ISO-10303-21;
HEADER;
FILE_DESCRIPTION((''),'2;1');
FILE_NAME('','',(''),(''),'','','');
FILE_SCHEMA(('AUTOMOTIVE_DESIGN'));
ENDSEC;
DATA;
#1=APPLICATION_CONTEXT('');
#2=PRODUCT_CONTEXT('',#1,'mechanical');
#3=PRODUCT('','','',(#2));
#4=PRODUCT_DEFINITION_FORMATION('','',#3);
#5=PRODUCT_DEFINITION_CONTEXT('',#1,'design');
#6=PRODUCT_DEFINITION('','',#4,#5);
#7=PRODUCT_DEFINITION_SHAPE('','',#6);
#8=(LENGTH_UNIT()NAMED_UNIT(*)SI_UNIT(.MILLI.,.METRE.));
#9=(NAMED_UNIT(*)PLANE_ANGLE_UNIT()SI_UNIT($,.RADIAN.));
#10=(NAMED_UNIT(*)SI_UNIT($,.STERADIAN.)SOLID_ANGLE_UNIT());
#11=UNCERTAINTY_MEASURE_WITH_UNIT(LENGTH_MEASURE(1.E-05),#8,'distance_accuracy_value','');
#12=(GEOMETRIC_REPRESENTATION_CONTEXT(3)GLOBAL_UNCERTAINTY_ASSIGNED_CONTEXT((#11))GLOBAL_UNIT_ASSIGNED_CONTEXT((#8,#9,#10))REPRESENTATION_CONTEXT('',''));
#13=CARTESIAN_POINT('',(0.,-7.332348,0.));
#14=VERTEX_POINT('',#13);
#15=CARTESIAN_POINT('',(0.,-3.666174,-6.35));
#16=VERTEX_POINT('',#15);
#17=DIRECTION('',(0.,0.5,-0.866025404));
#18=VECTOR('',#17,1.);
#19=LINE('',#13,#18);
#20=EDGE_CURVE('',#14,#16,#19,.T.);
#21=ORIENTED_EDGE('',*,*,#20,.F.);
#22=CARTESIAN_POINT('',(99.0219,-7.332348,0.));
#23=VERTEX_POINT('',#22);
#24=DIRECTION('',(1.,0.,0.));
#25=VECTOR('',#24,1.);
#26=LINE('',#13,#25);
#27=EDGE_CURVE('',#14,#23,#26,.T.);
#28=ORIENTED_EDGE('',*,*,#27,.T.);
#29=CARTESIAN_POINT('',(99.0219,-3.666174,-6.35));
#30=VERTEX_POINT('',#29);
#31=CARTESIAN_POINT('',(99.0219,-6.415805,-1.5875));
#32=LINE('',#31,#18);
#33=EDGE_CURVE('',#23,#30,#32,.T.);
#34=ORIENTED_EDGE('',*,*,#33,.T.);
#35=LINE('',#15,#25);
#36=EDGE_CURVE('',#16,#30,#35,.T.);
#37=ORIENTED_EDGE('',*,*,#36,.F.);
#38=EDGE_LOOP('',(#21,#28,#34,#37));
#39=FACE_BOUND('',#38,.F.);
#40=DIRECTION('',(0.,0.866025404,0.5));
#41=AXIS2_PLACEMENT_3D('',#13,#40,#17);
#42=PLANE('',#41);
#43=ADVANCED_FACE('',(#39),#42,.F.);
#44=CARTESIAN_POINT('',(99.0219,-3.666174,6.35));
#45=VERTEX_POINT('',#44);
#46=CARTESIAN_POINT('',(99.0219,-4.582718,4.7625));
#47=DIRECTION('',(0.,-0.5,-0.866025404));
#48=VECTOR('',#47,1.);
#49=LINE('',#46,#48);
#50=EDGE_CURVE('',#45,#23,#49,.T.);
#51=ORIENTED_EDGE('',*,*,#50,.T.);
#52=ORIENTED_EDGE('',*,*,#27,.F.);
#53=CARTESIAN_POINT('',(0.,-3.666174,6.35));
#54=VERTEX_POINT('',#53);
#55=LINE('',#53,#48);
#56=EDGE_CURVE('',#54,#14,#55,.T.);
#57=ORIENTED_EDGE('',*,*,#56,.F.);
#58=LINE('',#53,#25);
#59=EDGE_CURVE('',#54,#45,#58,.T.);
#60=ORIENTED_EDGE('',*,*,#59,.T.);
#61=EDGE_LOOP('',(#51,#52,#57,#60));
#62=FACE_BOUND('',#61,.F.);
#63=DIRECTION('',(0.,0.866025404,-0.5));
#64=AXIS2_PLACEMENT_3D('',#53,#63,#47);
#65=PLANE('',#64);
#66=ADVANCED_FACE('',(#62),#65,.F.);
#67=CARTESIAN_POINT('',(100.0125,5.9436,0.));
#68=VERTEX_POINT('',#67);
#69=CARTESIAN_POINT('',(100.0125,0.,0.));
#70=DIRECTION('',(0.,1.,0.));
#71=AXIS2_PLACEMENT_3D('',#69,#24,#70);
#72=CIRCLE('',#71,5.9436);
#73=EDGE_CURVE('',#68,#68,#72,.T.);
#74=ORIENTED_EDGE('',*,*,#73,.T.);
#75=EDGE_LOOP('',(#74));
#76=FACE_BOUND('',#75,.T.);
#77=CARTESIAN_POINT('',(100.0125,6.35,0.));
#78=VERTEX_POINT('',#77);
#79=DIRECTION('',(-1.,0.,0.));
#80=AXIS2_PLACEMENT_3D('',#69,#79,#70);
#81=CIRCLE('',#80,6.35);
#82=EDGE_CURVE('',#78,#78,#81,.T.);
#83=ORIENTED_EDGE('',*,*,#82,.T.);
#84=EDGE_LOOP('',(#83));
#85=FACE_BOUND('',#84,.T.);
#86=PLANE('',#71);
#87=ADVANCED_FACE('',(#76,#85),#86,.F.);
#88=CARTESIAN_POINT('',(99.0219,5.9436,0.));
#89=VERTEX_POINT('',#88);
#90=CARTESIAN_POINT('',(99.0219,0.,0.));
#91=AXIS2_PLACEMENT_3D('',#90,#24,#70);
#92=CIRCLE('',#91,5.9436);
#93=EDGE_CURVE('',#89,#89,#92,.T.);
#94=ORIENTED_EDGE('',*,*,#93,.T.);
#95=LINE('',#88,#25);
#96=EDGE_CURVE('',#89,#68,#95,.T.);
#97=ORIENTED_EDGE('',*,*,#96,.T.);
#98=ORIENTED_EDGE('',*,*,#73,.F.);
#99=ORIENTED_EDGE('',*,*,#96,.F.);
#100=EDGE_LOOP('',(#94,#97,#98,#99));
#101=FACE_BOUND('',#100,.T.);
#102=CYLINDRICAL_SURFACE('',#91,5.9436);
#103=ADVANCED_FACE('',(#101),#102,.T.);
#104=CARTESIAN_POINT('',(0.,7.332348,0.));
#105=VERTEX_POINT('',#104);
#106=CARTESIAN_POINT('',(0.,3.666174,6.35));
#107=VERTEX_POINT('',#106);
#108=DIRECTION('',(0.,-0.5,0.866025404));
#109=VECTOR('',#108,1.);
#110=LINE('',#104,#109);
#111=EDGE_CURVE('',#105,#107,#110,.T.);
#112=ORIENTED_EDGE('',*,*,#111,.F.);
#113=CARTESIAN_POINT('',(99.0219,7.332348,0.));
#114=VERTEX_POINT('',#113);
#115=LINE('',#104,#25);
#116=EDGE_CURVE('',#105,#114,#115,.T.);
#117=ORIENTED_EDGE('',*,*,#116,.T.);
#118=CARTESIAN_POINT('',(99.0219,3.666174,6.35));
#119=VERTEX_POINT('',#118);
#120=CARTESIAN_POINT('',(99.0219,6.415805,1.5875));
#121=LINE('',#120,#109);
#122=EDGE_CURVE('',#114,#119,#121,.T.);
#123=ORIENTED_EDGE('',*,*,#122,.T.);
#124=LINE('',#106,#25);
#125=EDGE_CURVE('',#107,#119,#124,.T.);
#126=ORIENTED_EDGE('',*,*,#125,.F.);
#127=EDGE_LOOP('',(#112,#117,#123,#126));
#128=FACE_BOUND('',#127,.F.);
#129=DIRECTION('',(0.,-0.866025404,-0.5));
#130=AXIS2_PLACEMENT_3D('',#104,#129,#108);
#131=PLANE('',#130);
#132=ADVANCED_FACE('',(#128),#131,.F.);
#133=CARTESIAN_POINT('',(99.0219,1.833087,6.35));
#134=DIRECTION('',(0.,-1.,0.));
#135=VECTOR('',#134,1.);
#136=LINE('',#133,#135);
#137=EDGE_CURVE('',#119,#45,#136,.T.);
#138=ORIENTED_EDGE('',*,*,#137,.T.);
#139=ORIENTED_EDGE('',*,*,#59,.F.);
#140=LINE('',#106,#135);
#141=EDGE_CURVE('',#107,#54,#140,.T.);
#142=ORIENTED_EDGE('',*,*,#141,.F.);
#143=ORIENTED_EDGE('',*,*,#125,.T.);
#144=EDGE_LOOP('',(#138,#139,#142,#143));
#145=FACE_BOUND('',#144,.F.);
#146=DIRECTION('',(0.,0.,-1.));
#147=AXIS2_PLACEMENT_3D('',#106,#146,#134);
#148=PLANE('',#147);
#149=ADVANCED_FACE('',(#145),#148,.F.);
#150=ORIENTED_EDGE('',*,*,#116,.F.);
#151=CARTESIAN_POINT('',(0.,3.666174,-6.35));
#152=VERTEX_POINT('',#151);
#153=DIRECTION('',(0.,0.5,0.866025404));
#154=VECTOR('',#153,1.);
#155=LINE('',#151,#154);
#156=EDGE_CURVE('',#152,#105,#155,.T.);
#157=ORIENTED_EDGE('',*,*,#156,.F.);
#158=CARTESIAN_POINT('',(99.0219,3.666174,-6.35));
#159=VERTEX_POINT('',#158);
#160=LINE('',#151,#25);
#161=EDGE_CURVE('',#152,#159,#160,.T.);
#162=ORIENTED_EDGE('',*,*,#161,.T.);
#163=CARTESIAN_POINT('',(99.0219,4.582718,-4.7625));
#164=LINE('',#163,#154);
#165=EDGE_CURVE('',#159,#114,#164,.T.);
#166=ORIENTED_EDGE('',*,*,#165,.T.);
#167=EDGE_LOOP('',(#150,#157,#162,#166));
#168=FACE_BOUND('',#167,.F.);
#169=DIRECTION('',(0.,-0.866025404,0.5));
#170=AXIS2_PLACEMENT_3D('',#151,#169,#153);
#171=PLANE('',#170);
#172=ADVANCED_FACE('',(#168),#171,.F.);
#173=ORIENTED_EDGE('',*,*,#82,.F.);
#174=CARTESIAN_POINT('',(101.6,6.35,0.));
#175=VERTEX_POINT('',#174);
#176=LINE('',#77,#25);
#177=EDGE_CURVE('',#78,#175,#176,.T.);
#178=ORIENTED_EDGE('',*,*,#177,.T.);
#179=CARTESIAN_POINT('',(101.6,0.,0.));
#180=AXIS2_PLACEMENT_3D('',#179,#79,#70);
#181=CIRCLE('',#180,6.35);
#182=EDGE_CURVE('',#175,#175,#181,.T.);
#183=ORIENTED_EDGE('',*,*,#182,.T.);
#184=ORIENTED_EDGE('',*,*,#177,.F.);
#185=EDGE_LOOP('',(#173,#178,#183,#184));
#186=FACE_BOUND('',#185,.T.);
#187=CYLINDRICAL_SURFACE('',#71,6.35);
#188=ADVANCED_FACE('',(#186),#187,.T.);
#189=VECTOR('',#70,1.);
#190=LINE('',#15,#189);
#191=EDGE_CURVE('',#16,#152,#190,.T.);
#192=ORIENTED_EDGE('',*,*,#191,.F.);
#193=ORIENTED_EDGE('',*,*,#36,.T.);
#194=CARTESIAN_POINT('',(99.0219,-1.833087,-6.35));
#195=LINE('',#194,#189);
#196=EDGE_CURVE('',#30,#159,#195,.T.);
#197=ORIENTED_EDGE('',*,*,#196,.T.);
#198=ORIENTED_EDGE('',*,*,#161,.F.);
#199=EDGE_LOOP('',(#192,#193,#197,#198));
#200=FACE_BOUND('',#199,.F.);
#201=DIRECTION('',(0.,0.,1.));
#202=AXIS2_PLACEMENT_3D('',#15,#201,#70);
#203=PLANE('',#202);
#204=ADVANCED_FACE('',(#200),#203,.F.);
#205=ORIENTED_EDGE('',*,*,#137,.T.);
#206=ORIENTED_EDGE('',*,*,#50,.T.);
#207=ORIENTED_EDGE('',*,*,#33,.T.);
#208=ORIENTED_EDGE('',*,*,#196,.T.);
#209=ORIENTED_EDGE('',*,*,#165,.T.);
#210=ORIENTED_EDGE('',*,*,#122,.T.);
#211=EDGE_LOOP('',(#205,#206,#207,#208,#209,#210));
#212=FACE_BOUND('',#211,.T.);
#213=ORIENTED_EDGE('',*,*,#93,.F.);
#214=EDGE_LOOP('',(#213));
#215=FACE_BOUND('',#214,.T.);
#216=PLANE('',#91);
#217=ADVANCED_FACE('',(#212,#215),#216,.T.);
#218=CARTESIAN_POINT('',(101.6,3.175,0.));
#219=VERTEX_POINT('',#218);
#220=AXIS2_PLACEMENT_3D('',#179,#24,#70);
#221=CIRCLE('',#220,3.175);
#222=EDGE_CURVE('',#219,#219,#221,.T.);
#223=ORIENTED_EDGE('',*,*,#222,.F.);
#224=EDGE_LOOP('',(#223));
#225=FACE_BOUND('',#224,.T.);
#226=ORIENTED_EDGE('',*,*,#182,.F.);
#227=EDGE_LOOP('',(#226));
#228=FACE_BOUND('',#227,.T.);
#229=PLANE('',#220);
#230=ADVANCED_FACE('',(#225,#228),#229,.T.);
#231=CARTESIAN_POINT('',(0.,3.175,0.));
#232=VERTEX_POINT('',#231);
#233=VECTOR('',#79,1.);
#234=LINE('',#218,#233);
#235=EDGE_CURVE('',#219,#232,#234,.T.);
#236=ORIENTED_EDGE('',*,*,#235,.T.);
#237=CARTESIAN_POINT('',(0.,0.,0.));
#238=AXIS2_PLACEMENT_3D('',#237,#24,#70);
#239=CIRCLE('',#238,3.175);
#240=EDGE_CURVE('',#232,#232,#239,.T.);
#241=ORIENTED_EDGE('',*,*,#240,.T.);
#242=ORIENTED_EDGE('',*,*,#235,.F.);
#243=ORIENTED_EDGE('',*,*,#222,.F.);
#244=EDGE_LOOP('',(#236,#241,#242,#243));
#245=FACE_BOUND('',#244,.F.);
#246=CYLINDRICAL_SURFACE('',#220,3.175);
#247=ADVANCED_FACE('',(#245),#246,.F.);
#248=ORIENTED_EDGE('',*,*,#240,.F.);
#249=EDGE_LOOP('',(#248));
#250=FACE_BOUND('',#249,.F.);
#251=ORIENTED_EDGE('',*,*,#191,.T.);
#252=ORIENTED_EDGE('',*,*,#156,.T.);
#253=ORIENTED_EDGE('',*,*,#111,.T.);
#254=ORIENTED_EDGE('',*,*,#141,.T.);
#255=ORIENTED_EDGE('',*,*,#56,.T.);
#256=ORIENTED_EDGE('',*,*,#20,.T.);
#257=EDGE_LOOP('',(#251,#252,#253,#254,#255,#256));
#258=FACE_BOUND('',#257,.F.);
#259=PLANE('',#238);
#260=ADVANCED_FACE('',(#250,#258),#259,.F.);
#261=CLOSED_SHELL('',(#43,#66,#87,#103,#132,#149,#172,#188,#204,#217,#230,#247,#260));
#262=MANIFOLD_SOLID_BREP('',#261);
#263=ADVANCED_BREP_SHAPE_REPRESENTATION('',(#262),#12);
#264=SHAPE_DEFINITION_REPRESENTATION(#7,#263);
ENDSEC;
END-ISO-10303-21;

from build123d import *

# Parameters (mm, degrees)
F1_DEPTH = 101.6
F4_R     = 3.175
F5_DEPTH = 101.601


with BuildPart() as f1:
    # F0 (on Right) → F1 (new body)
    with BuildSketch(Plane.YZ):
        Polygon((3.6661742094, 6.35), (-3.6661742094, 6.35), (-7.3323484187, 0), (-3.6661742094, -6.35), (3.6661742094, -6.35), (7.3323484187, 0), align=None)
    extrude(amount=F1_DEPTH)

    # F2 (on Top) → F3 (revolve, cut)
    with BuildSketch(Plane.XY):
        Polygon((100.0125, 6.35), (101.6, 6.35), (101.6, 7.3323484187), (99.0219, 7.3323484187), (99.0219, 5.9436), (100.0125, 5.9436), align=None)
    revolve(axis=Axis((50.8, 0, 0), (1, 0, 0)), mode=Mode.SUBTRACT)

    # F4 (on face) → F5 (cut, through all)
    with BuildSketch(Plane.YZ.offset(101.6)):
        Circle(F4_R)
    extrude(amount=-F5_DEPTH, mode=Mode.SUBTRACT)


solid = f1.part
